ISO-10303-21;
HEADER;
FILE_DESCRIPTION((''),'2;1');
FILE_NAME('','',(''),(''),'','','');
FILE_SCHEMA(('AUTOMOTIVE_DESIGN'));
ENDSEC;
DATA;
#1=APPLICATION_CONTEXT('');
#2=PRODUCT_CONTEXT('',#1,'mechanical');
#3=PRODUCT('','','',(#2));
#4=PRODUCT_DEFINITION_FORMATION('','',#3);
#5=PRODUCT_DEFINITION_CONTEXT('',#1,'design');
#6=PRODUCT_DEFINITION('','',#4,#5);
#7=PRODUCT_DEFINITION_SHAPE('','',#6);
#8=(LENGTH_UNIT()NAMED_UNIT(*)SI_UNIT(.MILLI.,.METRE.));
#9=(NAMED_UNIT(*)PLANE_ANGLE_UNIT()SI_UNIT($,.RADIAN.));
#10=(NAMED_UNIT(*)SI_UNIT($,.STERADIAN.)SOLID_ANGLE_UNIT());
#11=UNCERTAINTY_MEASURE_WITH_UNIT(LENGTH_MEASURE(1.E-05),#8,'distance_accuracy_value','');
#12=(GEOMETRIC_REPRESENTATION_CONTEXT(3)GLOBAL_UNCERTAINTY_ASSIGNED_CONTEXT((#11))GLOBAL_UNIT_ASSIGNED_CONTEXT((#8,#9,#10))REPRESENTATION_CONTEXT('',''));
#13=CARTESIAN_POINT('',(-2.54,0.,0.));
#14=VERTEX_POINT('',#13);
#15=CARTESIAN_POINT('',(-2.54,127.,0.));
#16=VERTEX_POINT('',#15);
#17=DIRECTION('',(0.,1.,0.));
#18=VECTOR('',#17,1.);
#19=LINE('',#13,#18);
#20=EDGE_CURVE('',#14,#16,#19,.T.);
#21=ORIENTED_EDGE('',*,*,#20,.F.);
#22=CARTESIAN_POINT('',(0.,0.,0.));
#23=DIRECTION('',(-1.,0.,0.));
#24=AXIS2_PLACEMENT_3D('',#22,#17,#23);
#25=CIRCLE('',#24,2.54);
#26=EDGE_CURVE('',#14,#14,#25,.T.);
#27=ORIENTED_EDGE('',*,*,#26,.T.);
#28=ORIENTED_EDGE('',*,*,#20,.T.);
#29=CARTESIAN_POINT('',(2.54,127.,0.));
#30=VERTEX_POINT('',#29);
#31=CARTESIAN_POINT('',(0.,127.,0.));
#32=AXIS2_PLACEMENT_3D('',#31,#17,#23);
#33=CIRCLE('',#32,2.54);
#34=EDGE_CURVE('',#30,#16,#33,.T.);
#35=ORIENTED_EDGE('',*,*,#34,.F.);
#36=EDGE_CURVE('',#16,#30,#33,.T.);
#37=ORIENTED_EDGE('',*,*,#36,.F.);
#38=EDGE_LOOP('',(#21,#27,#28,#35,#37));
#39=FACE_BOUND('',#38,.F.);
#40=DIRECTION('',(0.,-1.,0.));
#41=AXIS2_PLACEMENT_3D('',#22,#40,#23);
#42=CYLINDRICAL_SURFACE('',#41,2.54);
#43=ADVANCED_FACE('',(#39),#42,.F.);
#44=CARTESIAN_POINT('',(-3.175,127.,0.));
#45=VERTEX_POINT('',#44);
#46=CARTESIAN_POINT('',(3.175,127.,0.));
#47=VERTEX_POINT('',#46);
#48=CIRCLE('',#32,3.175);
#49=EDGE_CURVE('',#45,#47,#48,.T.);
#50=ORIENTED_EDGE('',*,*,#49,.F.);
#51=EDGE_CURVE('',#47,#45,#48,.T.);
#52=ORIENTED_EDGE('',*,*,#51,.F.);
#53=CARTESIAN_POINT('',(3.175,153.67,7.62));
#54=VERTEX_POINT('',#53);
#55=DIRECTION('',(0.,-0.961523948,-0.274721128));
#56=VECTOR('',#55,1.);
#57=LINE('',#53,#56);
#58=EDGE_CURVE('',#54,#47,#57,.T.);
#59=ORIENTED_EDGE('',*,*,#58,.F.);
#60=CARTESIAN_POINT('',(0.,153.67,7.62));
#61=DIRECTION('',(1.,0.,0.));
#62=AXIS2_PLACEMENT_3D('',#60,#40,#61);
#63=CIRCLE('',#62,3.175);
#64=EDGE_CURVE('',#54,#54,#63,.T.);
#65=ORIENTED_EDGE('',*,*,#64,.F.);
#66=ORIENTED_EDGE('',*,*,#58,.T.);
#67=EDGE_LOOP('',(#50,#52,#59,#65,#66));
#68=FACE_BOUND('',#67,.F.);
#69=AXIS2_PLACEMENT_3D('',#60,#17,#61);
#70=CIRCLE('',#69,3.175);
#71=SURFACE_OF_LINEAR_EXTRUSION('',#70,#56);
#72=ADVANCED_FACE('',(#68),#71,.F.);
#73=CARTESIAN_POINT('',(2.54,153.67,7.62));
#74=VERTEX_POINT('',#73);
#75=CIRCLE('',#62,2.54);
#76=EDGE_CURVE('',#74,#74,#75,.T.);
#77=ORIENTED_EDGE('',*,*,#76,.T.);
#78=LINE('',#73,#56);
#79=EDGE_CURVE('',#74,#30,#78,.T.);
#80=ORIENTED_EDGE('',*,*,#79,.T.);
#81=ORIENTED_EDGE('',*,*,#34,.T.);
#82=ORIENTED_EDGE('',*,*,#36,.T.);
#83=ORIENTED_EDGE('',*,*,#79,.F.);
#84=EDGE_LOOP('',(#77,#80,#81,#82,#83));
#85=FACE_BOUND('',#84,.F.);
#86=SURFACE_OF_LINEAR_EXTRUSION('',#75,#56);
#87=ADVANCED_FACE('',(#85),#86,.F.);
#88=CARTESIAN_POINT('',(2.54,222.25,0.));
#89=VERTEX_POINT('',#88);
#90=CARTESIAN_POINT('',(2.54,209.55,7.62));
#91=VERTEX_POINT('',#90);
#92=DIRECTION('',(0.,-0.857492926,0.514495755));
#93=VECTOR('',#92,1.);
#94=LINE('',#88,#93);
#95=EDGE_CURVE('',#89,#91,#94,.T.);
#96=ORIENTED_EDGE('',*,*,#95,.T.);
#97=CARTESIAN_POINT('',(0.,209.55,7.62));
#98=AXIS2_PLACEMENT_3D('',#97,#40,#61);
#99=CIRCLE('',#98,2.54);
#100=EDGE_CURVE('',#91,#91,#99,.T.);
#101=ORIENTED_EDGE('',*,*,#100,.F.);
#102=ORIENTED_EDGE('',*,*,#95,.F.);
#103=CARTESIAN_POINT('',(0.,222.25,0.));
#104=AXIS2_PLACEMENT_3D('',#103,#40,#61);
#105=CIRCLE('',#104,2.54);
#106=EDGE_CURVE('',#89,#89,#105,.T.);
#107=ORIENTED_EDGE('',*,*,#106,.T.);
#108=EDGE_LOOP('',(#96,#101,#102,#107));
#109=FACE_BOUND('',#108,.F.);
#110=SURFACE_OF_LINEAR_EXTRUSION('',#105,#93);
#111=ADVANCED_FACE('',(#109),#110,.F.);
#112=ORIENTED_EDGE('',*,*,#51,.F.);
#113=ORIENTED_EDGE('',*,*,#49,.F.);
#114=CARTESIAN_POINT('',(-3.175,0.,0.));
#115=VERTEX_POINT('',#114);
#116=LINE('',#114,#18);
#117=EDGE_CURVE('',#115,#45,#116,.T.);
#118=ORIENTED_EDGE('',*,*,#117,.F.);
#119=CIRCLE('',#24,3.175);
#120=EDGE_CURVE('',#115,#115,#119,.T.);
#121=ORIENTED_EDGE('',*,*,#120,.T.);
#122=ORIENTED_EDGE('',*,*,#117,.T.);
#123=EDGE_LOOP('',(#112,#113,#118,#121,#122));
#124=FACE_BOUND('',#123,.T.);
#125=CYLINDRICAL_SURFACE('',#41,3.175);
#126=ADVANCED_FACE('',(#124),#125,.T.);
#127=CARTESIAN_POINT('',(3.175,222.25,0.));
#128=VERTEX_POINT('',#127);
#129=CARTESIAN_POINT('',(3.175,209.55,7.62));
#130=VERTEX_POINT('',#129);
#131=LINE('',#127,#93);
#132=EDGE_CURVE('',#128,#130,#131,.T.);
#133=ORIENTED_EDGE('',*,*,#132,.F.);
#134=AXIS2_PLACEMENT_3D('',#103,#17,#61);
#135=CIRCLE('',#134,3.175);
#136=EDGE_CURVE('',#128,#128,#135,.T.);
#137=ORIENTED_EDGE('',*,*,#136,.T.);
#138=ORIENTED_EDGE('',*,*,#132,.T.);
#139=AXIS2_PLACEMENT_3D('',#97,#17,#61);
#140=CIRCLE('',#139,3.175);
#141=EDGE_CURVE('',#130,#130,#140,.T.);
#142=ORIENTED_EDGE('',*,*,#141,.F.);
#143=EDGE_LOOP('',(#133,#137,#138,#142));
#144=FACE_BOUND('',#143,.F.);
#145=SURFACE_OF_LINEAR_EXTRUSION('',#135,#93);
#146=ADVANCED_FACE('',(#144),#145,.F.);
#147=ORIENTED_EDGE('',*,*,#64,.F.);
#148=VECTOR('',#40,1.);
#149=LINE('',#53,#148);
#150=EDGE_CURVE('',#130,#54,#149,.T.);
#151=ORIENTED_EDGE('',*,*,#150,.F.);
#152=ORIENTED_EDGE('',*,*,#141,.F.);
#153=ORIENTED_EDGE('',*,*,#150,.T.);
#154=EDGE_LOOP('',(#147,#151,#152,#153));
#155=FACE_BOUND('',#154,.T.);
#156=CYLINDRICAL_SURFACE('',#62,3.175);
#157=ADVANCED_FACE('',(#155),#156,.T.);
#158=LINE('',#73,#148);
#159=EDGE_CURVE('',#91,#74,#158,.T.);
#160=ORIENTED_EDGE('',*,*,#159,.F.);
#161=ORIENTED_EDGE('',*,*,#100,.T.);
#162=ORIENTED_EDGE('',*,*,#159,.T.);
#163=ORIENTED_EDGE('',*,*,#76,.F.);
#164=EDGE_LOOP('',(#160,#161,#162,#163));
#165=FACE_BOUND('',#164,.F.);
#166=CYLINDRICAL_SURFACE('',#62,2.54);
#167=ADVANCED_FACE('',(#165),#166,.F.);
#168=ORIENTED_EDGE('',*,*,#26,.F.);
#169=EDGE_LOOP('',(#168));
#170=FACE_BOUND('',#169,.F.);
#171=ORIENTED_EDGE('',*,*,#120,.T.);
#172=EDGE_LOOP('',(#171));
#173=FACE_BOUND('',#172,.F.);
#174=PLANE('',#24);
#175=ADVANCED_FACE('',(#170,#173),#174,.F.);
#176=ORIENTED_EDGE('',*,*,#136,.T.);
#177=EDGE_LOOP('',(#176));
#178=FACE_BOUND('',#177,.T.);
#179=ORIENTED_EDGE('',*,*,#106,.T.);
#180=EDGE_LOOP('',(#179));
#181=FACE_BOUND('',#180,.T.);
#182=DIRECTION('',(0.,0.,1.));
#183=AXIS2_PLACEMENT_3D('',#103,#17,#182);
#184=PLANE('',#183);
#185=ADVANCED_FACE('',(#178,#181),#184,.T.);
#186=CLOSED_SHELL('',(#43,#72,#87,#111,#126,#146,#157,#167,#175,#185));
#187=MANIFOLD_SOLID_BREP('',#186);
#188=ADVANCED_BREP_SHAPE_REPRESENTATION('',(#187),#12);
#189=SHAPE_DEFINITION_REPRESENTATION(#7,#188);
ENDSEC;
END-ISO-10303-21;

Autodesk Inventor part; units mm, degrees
ref_plane "YZ Plane" through (0, 0, 0) normal (1, 0, 0) x (0, 1, 0)
ref_plane "XZ Plane" through (0, 0, 0) normal (0, 1, 0) x (-1, 0, 0)
ref_plane "XY Plane" through (0, 0, 0) normal (0, 0, 1) x (1, 0, 0)
sketch "Sketch1" plane through (0, 0, 0) normal (0, 1, 0) x (-1, 0, 0)
  circle A0 centre (0, 0) radius 3.175
  circle A1 centre (0, 0) radius 2.54
  dimension "d0" = 6.35
  dimension "d1" = 5.08
extrude "Extrusion1" add sketch "Sketch1" along normal blind 127
sketch "Sketch7" plane through (0, 127, 0) normal (0, 1, 0) x (1, 0, 0)
  circle A0 centre (0, 0) radius 2.54 projected
  circle A1 centre (0, 0) radius 3.175 projected
sketch "Sketch15" plane through (0, 0, 0) normal (1, 0, 0) x (0, 1, 0)
  line L0 (127, -3.175) -> (127, 3.175) projected
  line L1 (153.67, 7.62) -> (209.55, 7.62)
  line L2 (222.25, 0) -> (209.55, 7.62)
  line L3 (153.67, 7.62) -> (127, 0)
  point P0 (0, 0)
  dimension "d42" = 55.88
sweep "Sweep7" add profiles "Sketch7" path "Sketch15" path curves L3 L1 L2
properties part number "waterpipe"
